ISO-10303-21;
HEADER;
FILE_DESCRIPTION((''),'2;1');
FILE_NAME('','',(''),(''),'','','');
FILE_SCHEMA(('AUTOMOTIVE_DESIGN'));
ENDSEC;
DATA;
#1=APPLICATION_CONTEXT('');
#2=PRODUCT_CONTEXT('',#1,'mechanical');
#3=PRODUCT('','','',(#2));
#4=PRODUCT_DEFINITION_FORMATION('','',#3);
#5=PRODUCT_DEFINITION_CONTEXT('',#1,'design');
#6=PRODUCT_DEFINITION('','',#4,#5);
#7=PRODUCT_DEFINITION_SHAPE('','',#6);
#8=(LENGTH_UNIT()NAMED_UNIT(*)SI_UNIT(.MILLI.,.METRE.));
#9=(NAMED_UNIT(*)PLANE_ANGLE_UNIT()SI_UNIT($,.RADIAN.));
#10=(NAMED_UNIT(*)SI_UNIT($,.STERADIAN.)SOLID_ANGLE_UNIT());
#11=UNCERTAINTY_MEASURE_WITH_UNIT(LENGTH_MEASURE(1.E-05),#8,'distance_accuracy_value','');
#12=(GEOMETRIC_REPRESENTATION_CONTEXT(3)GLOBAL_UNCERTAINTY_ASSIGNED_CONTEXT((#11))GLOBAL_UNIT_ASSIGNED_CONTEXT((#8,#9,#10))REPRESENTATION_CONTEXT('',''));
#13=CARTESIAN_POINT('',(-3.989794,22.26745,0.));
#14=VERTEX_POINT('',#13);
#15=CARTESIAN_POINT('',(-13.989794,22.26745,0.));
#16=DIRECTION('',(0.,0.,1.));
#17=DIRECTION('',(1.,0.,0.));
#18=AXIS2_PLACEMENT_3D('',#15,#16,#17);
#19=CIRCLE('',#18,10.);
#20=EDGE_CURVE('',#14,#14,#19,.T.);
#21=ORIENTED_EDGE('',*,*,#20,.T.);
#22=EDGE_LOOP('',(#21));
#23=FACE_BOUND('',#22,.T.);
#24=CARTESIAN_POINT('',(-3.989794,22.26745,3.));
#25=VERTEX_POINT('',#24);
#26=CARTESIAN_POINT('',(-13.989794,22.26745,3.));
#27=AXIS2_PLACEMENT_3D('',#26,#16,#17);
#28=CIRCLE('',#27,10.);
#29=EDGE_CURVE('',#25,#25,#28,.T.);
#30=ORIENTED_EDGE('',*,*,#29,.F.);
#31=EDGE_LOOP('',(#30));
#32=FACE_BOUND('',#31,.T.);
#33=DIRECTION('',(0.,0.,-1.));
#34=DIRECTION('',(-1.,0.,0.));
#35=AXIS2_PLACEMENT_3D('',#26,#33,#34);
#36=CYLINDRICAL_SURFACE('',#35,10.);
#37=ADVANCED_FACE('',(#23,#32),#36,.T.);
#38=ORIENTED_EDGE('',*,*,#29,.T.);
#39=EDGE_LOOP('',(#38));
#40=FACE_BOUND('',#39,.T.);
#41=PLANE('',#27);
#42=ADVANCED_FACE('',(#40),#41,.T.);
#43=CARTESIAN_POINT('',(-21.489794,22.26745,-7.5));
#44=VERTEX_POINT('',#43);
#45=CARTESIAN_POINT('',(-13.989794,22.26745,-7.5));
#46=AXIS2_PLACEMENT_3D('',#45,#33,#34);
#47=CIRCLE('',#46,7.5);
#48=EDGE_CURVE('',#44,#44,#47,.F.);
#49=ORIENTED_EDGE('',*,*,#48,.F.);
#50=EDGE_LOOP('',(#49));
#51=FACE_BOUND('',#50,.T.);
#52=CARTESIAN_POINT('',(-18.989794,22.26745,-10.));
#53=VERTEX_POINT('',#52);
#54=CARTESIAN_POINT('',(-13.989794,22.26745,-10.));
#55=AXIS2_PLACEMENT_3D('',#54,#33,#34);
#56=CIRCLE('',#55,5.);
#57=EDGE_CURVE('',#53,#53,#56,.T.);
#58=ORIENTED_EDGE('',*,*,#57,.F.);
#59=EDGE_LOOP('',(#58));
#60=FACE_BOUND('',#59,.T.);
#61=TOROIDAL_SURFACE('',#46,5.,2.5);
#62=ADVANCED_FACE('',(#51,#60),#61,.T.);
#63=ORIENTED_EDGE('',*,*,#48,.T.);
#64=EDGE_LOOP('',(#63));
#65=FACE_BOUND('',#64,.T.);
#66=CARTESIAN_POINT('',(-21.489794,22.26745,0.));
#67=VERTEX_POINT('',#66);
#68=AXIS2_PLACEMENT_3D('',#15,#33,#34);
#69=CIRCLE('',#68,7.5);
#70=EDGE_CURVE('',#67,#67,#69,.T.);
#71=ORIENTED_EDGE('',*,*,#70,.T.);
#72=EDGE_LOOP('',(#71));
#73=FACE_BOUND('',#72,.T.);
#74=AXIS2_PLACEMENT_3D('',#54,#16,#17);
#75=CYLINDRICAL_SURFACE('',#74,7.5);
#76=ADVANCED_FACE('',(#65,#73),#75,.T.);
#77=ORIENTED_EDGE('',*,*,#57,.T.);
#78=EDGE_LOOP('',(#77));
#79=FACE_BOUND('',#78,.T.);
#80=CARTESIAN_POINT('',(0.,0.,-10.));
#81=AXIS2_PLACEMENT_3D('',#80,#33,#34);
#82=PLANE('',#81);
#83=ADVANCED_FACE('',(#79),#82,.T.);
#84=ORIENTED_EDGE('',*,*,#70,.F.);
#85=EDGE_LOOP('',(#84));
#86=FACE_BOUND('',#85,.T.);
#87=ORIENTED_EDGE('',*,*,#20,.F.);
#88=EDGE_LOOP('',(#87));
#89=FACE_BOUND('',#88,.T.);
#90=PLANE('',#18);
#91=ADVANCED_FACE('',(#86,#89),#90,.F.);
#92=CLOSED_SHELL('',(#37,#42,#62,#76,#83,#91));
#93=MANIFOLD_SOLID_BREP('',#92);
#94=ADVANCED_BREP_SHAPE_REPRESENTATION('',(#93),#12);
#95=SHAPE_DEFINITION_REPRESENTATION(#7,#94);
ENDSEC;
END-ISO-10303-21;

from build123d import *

# Parameters (mm, degrees)
SKETCH1_R           = 10
BOSS_EXTRUDE3_DEPTH = 3
SKETCH3_R           = 7.5
BOSS_EXTRUDE4_DEPTH = 10
FILLET1_R           = 2.5


with BuildPart() as part:
    # Sketch1 → Boss-Extrude3 (new body)
    with BuildSketch(Plane.XY):
        with Locations((-13.989793671, 22.267450219)):
            Circle(SKETCH1_R)
    extrude(amount=BOSS_EXTRUDE3_DEPTH)

    # Sketch3 → Boss-Extrude4 (add)
    with BuildSketch(Plane(origin=(0, 0, 0), x_dir=(-1, 0, 0), z_dir=(0, 0, -1))):
        with Locations((13.989793671, 22.267450219)):
            Circle(SKETCH3_R)
    extrude(amount=BOSS_EXTRUDE4_DEPTH)

    # Fillet1
    fillet1_edges = [part.edges().sort_by_distance(p)[0] for p in [
        (-6.489793671, 22.267450219, -10),
    ]]
    fillet(fillet1_edges, radius=FILLET1_R)


solid = part.part
